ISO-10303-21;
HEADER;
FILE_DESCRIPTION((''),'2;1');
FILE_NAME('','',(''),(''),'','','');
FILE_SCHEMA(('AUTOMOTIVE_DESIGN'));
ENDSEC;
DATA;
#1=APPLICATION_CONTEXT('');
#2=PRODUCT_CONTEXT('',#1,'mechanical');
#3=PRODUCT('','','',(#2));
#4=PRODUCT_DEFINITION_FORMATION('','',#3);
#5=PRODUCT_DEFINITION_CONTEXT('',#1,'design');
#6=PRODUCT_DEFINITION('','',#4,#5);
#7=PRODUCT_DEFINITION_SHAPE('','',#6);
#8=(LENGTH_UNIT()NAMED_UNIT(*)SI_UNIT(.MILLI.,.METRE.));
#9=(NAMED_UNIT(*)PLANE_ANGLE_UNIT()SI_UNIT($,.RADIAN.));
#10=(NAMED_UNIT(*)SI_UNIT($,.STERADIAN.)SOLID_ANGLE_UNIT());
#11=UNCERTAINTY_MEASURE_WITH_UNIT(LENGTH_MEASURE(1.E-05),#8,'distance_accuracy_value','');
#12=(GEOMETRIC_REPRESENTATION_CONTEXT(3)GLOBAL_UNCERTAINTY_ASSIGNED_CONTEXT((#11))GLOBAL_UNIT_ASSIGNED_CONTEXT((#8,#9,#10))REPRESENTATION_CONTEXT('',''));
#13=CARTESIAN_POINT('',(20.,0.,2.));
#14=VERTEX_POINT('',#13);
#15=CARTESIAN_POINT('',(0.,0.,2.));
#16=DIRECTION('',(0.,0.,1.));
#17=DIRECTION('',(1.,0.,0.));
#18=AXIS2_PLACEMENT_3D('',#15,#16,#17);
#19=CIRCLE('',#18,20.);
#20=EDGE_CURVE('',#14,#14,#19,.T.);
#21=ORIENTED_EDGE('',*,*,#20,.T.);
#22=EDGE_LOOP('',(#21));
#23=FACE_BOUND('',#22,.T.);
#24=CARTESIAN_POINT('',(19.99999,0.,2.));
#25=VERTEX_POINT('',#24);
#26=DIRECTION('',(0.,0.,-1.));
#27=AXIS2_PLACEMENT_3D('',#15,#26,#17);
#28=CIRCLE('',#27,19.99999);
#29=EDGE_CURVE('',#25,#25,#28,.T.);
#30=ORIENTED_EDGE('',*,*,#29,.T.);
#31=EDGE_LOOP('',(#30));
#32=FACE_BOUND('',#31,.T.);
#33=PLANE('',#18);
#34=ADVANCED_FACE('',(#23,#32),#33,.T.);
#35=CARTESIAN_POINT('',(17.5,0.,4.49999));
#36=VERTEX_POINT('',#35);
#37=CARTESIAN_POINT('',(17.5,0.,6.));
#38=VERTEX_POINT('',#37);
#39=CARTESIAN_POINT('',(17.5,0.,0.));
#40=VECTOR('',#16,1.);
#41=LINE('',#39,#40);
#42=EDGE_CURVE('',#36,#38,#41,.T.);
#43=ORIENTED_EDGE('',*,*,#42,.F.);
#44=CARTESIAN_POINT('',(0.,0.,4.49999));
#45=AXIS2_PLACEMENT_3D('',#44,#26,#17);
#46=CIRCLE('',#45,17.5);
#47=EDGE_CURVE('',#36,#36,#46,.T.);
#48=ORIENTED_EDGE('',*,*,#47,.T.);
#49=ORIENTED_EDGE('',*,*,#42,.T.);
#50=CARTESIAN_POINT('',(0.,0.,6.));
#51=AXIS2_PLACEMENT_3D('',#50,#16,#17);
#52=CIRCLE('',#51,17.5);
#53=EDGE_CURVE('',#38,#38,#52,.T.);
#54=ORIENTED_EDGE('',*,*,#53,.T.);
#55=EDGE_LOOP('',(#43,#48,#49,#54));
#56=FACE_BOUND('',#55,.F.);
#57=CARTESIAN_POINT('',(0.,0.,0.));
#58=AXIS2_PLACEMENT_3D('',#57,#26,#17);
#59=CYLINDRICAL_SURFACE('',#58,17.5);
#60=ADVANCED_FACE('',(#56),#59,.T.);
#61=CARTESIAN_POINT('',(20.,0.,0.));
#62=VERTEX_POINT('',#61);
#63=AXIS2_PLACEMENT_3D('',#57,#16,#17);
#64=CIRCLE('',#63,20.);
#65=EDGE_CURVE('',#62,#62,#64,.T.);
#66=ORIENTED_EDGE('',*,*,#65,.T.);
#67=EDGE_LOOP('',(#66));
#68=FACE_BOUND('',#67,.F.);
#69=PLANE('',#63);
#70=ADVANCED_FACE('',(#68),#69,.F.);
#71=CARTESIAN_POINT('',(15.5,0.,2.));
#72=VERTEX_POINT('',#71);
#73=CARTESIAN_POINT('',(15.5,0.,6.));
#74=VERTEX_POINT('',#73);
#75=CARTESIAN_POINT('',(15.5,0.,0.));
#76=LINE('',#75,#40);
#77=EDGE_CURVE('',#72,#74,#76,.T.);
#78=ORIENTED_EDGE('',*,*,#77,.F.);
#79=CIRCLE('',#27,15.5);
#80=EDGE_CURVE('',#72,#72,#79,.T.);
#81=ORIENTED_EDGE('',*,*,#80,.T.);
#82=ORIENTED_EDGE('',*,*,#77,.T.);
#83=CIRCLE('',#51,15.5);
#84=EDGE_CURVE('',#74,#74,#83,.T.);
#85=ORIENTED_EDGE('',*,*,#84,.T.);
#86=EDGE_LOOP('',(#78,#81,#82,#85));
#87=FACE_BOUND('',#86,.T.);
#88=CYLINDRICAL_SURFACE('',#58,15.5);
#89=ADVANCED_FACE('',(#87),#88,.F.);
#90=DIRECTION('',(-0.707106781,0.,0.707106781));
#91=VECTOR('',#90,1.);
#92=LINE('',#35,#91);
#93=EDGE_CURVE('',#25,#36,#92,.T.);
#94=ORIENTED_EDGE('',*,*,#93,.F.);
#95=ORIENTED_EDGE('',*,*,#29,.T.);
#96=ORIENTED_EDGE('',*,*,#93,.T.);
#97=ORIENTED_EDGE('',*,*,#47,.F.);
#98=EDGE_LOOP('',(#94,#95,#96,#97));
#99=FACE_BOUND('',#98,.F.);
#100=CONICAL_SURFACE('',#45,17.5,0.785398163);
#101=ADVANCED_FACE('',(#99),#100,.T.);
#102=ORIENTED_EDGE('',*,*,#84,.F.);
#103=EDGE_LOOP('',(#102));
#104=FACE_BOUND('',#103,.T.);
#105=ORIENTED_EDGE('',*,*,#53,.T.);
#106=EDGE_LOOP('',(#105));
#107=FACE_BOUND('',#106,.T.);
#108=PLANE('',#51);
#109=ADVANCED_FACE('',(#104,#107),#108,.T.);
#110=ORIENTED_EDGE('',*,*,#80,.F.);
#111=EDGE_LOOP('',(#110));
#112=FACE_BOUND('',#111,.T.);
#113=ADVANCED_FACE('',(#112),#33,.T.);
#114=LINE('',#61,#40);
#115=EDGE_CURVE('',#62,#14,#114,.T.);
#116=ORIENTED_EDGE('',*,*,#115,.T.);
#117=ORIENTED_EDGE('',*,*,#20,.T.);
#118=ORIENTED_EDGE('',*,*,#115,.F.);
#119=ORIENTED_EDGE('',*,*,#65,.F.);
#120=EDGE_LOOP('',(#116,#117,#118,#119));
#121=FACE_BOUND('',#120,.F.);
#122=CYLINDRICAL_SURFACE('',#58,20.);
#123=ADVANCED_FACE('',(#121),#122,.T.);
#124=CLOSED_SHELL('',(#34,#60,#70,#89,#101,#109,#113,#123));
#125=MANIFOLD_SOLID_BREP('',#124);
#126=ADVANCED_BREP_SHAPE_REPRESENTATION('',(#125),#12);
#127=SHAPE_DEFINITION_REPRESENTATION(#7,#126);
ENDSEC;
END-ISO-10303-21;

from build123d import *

# Parameters (mm, degrees)
F0_R     = 17.5
F0_R_2   = 15.5
F1_DEPTH = 6
F2_R     = 20
F3_DEPTH = 2
F4_SIZE  = 2.49999


# Not quite as in the source:
# - a fillet or chamfer is up to 0.001 mm smaller than in the source, because OpenCascade refuses the exact size


with BuildPart() as f1:
    # F0 (on Top) → F1 (new body)
    with BuildSketch(Plane.XY):
        Circle(F0_R)
        Circle(F0_R_2, mode=Mode.SUBTRACT)
    extrude(amount=F1_DEPTH)

    # F2 (on Top) → F3 (join)
    with BuildSketch(Plane.XY):
        Circle(F2_R)
    extrude(amount=F3_DEPTH)

    # F4 (size 2.5 in the source; OpenCascade refuses exactly that, so slightly less here)
    f4_edges = [f1.edges().sort_by_distance(p)[0] for p in [
        (-17.5, 0, 2),
    ]]
    chamfer(f4_edges, length=F4_SIZE)


solid = f1.part
